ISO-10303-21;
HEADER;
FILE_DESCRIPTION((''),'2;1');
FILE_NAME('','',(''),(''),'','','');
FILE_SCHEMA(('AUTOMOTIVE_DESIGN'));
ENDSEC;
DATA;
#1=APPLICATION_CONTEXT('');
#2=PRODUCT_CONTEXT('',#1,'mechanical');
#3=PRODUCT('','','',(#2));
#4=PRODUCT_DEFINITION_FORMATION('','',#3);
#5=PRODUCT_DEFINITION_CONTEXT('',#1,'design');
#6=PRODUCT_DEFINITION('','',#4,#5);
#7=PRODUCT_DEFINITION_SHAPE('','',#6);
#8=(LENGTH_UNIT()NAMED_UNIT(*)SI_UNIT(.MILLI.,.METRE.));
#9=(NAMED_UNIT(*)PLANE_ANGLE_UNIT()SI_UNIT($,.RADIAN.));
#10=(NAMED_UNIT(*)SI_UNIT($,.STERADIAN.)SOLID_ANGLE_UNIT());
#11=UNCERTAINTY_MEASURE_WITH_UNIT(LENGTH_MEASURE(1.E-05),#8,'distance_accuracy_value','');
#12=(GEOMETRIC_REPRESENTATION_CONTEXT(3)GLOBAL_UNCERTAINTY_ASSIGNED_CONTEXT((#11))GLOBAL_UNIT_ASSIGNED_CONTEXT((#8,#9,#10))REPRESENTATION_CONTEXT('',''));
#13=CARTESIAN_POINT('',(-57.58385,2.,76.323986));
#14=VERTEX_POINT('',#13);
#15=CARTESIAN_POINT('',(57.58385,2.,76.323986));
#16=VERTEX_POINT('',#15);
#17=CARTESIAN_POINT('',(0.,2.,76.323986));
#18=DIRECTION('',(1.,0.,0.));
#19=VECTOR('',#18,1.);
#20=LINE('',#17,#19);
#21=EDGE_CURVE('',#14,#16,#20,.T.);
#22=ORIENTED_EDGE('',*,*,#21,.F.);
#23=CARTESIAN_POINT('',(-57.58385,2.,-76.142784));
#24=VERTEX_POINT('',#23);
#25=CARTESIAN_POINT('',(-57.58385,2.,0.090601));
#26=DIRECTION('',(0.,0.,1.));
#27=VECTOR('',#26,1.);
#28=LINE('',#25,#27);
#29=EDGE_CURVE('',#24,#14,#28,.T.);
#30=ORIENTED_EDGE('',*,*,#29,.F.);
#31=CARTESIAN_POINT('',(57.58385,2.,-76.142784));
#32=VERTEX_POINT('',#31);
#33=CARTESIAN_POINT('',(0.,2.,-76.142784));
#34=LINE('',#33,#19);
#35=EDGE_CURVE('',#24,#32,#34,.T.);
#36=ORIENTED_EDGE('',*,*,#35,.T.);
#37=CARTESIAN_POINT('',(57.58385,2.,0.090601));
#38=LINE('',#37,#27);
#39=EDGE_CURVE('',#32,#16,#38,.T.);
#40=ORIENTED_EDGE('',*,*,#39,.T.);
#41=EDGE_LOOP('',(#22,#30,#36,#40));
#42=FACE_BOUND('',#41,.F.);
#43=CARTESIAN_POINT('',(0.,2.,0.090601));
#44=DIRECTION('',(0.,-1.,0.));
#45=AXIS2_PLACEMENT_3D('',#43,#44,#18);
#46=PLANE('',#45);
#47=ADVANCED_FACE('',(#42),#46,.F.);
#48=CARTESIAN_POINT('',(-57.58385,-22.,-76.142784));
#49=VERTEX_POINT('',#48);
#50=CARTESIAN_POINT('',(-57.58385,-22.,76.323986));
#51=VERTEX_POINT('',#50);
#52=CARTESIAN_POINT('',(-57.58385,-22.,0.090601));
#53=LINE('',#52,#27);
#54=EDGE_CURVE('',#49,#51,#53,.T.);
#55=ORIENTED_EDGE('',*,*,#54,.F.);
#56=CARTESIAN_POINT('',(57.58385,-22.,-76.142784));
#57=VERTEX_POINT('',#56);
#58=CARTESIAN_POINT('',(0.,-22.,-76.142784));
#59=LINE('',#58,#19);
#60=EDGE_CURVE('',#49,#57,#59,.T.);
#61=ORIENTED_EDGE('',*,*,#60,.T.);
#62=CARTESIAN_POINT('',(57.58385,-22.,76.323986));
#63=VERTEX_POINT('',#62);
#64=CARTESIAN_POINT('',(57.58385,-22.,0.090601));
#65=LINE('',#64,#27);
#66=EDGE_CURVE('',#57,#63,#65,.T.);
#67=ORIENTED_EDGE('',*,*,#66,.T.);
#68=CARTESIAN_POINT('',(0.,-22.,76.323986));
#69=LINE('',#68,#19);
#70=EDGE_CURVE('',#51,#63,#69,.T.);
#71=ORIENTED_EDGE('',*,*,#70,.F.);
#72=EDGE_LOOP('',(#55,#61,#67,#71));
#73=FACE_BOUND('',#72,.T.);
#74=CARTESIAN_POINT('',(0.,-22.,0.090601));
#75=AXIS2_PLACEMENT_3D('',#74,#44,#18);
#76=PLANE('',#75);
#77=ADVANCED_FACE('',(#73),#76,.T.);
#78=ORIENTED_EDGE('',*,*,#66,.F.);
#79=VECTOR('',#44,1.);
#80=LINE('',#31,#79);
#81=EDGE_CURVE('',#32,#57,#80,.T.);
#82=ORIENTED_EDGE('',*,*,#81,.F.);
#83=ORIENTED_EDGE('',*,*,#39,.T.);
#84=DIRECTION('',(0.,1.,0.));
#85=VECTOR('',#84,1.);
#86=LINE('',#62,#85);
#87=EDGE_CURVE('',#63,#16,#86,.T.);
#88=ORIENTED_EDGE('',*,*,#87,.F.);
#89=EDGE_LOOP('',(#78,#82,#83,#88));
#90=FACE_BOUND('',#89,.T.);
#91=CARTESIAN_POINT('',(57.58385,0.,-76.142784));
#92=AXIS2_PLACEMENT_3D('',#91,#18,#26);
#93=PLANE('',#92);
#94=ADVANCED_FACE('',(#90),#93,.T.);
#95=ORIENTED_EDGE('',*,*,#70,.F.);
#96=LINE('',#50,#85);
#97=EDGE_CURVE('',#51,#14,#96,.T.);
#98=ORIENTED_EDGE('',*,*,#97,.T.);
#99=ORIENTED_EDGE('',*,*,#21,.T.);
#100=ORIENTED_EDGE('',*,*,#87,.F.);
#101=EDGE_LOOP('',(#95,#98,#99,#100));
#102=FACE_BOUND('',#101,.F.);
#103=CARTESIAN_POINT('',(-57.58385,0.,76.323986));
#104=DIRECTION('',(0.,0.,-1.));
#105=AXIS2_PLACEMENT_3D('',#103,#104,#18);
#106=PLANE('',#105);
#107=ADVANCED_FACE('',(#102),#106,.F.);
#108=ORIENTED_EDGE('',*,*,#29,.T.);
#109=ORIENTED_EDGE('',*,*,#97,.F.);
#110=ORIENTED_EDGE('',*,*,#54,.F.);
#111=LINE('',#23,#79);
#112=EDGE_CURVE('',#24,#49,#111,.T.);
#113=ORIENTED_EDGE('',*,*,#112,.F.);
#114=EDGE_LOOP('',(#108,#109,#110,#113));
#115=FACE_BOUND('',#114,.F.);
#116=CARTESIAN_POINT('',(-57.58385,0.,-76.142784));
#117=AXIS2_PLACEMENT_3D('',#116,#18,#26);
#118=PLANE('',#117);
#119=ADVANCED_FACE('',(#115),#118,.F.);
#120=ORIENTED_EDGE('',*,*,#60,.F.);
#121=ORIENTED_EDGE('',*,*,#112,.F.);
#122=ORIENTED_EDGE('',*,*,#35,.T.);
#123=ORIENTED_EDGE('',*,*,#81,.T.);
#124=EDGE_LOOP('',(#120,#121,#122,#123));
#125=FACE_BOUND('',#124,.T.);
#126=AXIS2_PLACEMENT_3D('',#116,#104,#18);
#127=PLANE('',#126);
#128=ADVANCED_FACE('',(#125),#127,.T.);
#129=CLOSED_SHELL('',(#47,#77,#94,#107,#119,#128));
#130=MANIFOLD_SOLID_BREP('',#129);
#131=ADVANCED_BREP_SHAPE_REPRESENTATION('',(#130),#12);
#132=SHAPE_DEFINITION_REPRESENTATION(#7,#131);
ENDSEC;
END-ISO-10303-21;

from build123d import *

# Parameters (mm, degrees)
F0_W          = 115.1676997542
F0_H          = 152.4667702615
F1_DEPTH      = 22
F1_DEPTH_BACK = 2


# Not quite as in the source:
# - the program builds the solid bodies; features that only make, move or delete a surface that nothing else refers to are left out


with BuildPart() as f1:
    # F0 (on Front) → F1 (new body, two sides)
    with BuildSketch(Plane.XZ) as f1_sk:
        with Locations((0, 0.0906009227)):
            Rectangle(F0_W, F0_H)
    extrude(amount=F1_DEPTH)
    extrude(f1_sk.sketch, amount=-F1_DEPTH_BACK)


solid = f1.part
